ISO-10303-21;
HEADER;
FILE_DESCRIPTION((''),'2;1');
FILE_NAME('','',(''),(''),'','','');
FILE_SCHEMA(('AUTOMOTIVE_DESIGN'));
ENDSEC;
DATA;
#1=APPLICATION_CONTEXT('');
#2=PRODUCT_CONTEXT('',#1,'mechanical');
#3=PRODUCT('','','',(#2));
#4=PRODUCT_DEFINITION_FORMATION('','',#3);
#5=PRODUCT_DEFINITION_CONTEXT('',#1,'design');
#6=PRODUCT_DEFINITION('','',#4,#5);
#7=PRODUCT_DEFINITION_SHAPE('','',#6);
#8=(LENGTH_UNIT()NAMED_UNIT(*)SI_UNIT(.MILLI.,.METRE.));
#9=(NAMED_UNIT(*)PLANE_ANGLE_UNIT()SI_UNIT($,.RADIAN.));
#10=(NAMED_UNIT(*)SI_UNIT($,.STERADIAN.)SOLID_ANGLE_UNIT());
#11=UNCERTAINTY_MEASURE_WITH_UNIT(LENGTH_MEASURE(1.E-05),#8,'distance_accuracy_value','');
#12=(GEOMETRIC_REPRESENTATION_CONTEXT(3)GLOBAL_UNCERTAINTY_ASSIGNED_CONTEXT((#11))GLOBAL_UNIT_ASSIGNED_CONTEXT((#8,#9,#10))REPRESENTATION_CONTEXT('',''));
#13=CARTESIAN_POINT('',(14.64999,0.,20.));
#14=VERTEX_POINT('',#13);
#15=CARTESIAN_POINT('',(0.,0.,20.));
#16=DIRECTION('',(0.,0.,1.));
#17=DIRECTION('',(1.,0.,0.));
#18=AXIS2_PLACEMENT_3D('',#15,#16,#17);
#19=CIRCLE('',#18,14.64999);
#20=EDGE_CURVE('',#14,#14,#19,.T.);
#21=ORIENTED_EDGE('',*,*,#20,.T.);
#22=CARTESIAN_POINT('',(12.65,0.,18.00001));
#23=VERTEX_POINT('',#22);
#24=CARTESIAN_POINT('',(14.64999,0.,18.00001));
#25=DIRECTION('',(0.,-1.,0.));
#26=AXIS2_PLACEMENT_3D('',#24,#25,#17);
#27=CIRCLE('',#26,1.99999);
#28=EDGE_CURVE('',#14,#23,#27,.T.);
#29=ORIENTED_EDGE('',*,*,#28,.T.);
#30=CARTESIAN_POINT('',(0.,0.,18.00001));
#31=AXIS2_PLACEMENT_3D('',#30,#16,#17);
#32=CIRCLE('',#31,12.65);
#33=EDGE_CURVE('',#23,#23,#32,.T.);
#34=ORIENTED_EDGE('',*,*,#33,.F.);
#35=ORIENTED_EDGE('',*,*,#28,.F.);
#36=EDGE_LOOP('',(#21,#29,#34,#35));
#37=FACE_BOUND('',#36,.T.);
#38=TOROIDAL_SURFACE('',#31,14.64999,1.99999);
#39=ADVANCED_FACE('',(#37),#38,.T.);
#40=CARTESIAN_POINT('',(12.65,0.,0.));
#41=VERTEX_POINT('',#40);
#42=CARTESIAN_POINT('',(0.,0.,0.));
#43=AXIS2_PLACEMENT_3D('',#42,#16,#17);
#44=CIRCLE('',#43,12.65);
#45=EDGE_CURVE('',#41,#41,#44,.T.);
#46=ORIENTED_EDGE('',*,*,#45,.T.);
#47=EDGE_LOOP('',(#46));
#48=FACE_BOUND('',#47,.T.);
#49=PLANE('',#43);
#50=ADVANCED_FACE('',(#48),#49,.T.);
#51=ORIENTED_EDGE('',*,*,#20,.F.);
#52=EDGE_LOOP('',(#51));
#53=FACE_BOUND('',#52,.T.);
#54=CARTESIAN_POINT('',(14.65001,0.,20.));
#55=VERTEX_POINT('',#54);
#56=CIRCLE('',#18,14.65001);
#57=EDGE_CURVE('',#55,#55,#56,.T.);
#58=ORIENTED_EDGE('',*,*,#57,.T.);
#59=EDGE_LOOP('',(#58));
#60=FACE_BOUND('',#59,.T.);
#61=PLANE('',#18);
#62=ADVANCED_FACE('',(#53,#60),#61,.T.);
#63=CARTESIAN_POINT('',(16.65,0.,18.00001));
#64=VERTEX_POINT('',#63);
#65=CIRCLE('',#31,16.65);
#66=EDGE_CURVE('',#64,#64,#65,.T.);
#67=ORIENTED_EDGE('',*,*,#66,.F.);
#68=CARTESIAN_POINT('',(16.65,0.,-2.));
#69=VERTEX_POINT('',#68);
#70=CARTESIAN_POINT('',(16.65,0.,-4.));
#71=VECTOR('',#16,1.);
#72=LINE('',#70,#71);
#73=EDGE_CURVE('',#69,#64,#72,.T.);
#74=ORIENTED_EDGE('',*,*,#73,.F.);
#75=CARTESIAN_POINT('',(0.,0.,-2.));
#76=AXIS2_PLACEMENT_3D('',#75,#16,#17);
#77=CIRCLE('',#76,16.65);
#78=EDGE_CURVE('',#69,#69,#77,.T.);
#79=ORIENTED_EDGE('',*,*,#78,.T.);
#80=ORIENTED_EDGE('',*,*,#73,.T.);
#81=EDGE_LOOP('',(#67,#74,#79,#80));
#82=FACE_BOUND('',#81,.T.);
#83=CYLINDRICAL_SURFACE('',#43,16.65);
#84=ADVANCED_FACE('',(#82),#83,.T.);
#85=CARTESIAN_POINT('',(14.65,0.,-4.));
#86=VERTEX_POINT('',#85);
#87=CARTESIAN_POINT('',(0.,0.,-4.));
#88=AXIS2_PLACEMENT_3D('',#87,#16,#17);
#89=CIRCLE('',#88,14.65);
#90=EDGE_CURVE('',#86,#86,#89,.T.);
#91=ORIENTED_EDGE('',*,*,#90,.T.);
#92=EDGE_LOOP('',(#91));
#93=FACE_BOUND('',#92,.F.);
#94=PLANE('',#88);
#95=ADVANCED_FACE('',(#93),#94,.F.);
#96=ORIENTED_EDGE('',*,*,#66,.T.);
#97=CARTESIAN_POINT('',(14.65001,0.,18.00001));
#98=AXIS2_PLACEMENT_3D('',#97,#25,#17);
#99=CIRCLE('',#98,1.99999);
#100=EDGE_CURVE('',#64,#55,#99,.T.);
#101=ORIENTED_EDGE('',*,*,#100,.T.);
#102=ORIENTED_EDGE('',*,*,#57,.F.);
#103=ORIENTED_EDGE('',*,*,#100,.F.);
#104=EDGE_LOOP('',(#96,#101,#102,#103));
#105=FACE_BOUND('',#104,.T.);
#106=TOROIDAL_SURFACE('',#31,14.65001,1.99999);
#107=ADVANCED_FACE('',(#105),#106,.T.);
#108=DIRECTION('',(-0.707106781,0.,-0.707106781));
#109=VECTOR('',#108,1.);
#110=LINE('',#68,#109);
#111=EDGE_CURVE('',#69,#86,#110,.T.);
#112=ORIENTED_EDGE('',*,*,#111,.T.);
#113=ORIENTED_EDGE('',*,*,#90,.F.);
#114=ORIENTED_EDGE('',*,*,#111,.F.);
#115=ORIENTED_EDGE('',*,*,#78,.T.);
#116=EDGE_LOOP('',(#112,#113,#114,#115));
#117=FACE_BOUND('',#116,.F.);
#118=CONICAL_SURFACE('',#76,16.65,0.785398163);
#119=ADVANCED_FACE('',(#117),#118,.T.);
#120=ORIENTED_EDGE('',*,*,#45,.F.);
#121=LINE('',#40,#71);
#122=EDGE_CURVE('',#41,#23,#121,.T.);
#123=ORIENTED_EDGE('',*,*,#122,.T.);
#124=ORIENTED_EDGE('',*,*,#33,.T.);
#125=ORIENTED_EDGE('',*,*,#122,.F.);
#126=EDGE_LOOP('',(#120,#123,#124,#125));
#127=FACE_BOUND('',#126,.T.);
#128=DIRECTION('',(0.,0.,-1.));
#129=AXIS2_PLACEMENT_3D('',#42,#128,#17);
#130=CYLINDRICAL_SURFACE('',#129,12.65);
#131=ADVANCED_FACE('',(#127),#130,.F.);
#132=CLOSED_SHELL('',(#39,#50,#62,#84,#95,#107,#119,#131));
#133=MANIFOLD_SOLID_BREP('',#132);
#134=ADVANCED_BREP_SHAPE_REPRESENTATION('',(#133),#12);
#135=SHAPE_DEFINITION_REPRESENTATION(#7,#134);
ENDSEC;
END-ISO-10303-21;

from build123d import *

# Parameters (mm, degrees)
F0_R     = 16.65
F0_R_2   = 12.65
F1_DEPTH = 20
F2_DEPTH = 4
F3_SIZE  = 2
F4_R     = 1.99999


# Not quite as in the source:
# - a fillet or chamfer is up to 0.001 mm smaller than in the source, because OpenCascade refuses the exact size


with BuildPart() as f1:
    # F0 (on Top) → F1 (new body)
    with BuildSketch(Plane.XY):
        Circle(F0_R)
        Circle(F0_R_2, mode=Mode.SUBTRACT)
    extrude(amount=F1_DEPTH)

    # F0 (on Top) → F2 (join)
    with BuildSketch(Plane.XY):
        Circle(F0_R)
        Circle(F0_R_2, mode=Mode.SUBTRACT)
        Circle(F0_R_2)
    extrude(amount=-F2_DEPTH)

    # F3
    f3_edges = [f1.edges().sort_by_distance(p)[0] for p in [
        (-16.65, 0, -4),
    ]]
    chamfer(f3_edges, length=F3_SIZE)

    # F4 (radius 2 in the source; OpenCascade refuses exactly that, so slightly less here)
    f4_edges = [f1.edges().sort_by_distance(p)[0] for p in [
        (-12.65, 0, 20),
        (-16.65, 0, 20),
    ]]
    fillet(f4_edges, radius=F4_R)


solid = f1.part
